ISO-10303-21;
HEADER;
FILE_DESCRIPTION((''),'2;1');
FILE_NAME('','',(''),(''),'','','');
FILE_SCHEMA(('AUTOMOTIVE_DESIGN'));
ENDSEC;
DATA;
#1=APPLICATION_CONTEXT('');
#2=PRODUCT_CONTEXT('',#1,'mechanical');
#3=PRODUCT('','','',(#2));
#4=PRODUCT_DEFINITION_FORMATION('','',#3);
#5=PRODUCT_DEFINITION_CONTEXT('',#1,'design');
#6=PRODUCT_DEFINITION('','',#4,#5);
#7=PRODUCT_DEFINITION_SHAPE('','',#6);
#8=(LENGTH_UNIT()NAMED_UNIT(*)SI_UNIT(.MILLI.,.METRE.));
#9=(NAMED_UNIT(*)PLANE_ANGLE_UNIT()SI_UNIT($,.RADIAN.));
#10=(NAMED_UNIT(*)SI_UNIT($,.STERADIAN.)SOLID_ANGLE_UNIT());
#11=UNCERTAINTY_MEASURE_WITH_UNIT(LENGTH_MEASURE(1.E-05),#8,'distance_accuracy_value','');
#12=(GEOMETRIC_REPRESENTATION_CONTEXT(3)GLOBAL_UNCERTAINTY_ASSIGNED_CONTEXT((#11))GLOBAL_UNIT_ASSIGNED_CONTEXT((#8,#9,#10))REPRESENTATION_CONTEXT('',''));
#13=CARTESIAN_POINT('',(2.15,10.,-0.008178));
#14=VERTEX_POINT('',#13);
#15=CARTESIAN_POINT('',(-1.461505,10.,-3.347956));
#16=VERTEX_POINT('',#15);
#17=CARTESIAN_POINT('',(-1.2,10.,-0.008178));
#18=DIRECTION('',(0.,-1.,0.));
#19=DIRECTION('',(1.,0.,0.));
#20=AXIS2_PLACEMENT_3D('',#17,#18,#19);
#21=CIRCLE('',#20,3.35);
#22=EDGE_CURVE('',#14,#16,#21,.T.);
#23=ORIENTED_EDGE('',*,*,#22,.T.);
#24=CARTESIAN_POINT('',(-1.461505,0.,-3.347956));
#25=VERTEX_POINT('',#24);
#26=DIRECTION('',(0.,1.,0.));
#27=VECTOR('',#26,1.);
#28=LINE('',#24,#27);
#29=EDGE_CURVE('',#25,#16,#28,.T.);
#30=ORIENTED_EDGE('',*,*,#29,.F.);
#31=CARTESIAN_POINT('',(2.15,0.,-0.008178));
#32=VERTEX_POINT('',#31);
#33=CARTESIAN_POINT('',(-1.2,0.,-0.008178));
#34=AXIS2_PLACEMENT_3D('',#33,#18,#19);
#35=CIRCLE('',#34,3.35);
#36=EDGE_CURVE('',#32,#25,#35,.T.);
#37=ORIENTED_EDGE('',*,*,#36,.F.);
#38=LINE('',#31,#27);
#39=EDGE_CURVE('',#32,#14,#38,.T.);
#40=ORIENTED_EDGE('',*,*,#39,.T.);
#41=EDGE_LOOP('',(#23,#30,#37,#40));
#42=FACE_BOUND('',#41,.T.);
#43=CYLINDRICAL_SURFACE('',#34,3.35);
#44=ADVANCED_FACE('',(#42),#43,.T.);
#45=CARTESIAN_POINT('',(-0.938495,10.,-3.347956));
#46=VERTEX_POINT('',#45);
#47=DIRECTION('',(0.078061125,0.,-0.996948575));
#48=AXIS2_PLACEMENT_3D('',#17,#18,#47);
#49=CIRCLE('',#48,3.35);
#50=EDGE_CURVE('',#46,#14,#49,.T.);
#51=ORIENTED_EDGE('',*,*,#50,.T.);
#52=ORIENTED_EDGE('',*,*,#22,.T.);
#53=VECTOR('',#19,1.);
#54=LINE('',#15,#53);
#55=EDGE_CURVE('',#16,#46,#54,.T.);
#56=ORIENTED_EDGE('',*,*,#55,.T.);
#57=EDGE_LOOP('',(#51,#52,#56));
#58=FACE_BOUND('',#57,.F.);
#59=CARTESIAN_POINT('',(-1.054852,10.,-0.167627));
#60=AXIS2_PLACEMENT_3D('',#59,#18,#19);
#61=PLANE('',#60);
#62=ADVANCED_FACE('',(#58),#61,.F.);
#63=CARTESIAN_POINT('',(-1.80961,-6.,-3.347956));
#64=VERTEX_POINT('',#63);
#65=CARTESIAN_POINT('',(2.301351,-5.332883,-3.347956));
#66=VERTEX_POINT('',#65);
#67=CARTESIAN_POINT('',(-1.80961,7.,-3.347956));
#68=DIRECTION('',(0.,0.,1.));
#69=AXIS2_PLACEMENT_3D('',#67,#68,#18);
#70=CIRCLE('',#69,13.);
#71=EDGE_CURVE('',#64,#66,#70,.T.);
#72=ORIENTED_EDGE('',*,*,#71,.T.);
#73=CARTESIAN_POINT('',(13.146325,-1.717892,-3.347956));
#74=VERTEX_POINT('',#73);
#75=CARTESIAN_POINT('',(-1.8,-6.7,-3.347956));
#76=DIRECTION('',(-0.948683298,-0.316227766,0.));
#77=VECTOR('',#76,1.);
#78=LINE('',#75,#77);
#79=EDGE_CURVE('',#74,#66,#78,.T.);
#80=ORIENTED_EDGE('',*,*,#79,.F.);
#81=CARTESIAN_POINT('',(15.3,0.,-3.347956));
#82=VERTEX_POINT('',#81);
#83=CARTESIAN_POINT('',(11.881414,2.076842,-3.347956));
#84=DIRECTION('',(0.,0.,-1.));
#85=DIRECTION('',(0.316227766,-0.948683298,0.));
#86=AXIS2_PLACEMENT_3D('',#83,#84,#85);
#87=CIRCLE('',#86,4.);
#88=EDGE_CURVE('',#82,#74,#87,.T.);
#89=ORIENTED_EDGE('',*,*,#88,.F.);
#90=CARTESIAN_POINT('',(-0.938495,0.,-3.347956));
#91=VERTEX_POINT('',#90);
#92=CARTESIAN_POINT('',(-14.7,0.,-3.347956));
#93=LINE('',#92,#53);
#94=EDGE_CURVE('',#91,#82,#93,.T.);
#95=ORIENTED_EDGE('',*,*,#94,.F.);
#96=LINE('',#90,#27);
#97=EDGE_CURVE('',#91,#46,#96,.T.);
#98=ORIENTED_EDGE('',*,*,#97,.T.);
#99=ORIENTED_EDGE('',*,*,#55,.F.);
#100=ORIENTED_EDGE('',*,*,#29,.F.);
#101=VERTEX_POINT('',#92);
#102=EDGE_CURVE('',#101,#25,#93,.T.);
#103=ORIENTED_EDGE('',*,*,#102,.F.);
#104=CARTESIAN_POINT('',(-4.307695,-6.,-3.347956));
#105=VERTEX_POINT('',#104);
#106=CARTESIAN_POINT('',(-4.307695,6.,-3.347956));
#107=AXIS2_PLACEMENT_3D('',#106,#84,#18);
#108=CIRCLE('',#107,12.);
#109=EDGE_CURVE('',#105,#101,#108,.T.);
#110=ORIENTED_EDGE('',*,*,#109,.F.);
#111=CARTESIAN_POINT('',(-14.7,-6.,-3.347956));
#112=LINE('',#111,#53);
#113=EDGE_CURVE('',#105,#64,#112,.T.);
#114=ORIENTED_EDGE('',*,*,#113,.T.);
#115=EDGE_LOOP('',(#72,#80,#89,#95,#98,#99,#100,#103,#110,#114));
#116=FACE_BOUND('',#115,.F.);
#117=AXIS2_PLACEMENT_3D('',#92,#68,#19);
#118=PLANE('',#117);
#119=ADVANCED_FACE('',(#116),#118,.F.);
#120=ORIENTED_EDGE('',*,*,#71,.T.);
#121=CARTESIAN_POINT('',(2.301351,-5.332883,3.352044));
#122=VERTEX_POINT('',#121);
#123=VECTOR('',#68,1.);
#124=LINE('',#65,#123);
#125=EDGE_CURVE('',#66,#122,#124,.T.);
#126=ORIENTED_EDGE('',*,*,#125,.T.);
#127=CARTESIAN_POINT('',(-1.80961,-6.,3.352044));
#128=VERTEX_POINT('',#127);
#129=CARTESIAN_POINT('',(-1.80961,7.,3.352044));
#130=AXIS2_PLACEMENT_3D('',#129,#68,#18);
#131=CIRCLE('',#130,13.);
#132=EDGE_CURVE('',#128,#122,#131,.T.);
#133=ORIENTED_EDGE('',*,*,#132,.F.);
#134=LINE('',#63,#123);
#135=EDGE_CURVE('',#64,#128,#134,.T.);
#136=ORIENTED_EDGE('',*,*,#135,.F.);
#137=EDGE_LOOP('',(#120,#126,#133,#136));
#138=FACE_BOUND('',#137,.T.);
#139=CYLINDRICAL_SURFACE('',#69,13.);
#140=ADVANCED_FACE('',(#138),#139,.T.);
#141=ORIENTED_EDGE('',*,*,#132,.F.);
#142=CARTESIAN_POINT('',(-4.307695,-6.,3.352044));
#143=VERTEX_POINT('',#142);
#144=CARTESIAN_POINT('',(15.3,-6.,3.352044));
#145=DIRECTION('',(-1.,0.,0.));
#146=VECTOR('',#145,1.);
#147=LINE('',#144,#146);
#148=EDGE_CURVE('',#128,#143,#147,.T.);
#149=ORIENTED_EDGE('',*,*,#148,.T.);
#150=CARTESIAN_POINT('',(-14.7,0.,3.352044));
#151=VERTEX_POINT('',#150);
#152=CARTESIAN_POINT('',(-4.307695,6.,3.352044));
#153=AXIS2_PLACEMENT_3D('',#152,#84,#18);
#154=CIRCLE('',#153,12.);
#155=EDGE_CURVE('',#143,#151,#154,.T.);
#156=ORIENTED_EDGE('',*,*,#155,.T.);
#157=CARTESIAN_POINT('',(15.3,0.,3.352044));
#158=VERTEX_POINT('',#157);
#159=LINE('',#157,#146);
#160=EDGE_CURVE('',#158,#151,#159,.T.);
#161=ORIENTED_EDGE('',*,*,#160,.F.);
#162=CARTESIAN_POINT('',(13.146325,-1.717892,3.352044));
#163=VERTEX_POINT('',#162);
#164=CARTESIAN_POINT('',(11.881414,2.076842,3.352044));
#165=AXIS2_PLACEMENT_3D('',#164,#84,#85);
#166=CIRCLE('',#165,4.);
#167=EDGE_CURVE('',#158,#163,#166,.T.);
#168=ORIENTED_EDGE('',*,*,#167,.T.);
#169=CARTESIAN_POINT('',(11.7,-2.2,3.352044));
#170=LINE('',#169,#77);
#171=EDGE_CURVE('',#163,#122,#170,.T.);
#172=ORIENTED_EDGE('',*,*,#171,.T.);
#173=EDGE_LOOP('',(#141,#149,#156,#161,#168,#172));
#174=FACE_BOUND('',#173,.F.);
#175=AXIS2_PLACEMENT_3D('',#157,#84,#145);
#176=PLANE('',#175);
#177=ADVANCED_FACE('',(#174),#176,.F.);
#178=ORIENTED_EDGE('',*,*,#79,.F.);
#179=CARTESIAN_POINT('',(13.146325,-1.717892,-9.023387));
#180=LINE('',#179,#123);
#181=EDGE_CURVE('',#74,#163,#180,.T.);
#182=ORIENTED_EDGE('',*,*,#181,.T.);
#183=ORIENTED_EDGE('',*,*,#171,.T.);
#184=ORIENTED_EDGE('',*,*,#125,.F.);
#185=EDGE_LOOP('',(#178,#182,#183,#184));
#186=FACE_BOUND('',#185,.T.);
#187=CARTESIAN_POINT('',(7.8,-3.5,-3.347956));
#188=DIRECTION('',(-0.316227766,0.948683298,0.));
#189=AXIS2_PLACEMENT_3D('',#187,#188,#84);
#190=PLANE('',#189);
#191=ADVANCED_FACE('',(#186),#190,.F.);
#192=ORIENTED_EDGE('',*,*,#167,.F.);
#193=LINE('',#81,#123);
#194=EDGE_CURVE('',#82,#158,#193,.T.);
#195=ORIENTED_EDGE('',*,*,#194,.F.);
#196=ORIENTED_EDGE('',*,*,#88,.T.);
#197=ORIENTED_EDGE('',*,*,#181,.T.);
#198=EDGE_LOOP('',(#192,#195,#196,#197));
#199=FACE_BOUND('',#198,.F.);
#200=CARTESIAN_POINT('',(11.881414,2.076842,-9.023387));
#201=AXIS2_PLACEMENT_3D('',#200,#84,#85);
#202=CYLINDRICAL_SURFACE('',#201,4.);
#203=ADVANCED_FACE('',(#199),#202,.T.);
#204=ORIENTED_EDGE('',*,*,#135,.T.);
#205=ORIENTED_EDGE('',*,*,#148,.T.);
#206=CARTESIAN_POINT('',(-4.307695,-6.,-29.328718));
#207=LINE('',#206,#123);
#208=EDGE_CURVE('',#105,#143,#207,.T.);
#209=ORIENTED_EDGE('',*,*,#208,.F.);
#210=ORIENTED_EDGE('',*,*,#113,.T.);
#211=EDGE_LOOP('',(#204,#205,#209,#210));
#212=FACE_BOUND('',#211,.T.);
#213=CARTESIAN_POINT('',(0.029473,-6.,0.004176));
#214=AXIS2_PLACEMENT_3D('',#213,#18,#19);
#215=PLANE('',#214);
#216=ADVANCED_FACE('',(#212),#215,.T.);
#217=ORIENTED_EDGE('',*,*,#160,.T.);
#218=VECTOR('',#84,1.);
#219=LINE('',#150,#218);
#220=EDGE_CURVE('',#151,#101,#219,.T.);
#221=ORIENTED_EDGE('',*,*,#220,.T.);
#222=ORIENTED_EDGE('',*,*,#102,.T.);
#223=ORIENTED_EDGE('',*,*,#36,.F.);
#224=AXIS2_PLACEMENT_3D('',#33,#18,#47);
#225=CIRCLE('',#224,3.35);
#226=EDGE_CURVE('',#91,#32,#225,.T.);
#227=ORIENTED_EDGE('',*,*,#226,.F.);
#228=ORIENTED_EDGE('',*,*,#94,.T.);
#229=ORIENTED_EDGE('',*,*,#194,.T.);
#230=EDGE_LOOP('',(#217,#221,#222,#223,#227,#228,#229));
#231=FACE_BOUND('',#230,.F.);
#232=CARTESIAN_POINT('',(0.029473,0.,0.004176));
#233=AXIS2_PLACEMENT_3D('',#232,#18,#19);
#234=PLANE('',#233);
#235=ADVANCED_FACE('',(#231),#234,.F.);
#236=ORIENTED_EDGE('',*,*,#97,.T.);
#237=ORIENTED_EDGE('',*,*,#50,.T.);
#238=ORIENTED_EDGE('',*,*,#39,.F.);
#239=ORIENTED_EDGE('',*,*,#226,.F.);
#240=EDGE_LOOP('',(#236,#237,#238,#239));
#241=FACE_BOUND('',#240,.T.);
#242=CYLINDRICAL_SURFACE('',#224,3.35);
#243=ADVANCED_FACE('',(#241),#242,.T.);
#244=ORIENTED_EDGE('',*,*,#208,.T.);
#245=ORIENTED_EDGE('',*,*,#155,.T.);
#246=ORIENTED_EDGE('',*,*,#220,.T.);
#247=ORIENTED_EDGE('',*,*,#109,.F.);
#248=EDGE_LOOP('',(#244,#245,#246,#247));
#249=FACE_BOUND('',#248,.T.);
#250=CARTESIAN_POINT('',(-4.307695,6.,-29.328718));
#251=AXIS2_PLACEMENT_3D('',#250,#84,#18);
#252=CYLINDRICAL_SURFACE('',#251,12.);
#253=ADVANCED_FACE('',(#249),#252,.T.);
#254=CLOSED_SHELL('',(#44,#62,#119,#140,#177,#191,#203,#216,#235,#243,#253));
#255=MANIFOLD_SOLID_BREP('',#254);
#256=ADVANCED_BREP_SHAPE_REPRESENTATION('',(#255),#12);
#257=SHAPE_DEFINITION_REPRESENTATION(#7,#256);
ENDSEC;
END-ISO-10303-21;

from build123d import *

# Parameters (mm, degrees)
F1_DEPTH    = 10
F2_DEPTH    = 6
F3_SIZE2    = 15
F3_SIZE     = 5
F4_T1_DEPTH = 58.6615242271
F5_R        = 13
F6_T1_DEPTH = 18.0508625467


# Not quite as in the source:
# - a fillet or chamfer that OpenCascade refuses, or shapes differently, is made with other operations: its cross-section is extruded or revolved along the edge and cut away or added


with BuildPart() as f1:
    # F0 (on Front) → F1 (new body)
    with BuildSketch(Plane.XZ):
        with BuildLine():
            ThreePointArc((2.15, -0.0081778196), (-3.4744734584, 2.4513486566), (-1.4615047685, -3.3479555451))
            Line((-1.4615047685, -3.3479555451), (-0.9384952315, -3.3479555451))
            ThreePointArc((-0.9384952315, -3.3479555451), (1.2595264762, -2.2826512779), (2.15, -0.0081778196))
        make_face()
    extrude(amount=-F1_DEPTH)

    # F0 (on Front) → F2 (join)
    with BuildSketch(Plane.XZ):
        with BuildLine():
            Line((15.3, 3.3520444549), (-14.7, 3.3520444549))
            Line((-14.7, 3.3520444549), (-14.7, -3.3479555451))
            Line((-14.7, -3.3479555451), (-1.4615047685, -3.3479555451))
            ThreePointArc((-1.4615047685, -3.3479555451), (-3.4744734584, 2.4513486566), (2.15, -0.0081778196))
            ThreePointArc((2.15, -0.0081778196), (1.2595264762, -2.2826512779), (-0.9384952315, -3.3479555451))
            Line((-0.9384952315, -3.3479555451), (15.3, -3.3479555451))
            Line((15.3, -3.3479555451), (15.3, 3.3520444549))
        make_face()
        with BuildLine():
            ThreePointArc((2.15, -0.0081778196), (-3.4744734584, 2.4513486566), (-1.4615047685, -3.3479555451))
            Line((-1.4615047685, -3.3479555451), (-0.9384952315, -3.3479555451))
            ThreePointArc((-0.9384952315, -3.3479555451), (1.2595264762, -2.2826512779), (2.15, -0.0081778196))
        make_face()
    extrude(amount=F2_DEPTH)

    # F3
    f3_edges = [f1.edges().sort_by_distance(p)[0] for p in [
        (15.3, -6, 0.002044),
    ]]
    f3_side = f1.faces().sort_by_distance((15.3, -3, 0.002044))[0]
    chamfer(f3_edges, length=F3_SIZE, length2=F3_SIZE2, reference=f3_side)

    # F4: fillet of radius 12 on 1 edges, made by hand

    # F4_s2 → F4_t1 (cut)
    with BuildSketch(Plane.XY.offset(-29.3287176586)):
        with BuildLine():
            ThreePointArc((-4.3076951546, -6), (-10.3076951546, -4.3923048454), (-14.7, 0))
            Line((-14.7, 0), (-14.7, -6))
            Line((-14.7, -6), (-4.3076951546, -6))
        make_face()
    extrude(amount=F4_T1_DEPTH, mode=Mode.SUBTRACT)

    # F5
    f5_edges = [f1.edges().sort_by_distance(p)[0] for p in [
        (0.3, -6, 0.002044),
    ]]
    fillet(f5_edges, radius=F5_R)

    # F6: fillet of radius 4 on 1 edges, made by hand

    # F6_s2 → F6_t1 (cut)
    with BuildSketch(Plane.XY.offset(-9.0233868185)):
        with BuildLine():
            ThreePointArc((13.1463252567, -1.7178915811), (14.3757224349, -1.0502059409), (15.3, 0))
            Line((15.3, 0), (15.3, -1))
            Line((15.3, -1), (13.1463252567, -1.7178915811))
        make_face()
    extrude(amount=F6_T1_DEPTH, mode=Mode.SUBTRACT)


solid = f1.part
